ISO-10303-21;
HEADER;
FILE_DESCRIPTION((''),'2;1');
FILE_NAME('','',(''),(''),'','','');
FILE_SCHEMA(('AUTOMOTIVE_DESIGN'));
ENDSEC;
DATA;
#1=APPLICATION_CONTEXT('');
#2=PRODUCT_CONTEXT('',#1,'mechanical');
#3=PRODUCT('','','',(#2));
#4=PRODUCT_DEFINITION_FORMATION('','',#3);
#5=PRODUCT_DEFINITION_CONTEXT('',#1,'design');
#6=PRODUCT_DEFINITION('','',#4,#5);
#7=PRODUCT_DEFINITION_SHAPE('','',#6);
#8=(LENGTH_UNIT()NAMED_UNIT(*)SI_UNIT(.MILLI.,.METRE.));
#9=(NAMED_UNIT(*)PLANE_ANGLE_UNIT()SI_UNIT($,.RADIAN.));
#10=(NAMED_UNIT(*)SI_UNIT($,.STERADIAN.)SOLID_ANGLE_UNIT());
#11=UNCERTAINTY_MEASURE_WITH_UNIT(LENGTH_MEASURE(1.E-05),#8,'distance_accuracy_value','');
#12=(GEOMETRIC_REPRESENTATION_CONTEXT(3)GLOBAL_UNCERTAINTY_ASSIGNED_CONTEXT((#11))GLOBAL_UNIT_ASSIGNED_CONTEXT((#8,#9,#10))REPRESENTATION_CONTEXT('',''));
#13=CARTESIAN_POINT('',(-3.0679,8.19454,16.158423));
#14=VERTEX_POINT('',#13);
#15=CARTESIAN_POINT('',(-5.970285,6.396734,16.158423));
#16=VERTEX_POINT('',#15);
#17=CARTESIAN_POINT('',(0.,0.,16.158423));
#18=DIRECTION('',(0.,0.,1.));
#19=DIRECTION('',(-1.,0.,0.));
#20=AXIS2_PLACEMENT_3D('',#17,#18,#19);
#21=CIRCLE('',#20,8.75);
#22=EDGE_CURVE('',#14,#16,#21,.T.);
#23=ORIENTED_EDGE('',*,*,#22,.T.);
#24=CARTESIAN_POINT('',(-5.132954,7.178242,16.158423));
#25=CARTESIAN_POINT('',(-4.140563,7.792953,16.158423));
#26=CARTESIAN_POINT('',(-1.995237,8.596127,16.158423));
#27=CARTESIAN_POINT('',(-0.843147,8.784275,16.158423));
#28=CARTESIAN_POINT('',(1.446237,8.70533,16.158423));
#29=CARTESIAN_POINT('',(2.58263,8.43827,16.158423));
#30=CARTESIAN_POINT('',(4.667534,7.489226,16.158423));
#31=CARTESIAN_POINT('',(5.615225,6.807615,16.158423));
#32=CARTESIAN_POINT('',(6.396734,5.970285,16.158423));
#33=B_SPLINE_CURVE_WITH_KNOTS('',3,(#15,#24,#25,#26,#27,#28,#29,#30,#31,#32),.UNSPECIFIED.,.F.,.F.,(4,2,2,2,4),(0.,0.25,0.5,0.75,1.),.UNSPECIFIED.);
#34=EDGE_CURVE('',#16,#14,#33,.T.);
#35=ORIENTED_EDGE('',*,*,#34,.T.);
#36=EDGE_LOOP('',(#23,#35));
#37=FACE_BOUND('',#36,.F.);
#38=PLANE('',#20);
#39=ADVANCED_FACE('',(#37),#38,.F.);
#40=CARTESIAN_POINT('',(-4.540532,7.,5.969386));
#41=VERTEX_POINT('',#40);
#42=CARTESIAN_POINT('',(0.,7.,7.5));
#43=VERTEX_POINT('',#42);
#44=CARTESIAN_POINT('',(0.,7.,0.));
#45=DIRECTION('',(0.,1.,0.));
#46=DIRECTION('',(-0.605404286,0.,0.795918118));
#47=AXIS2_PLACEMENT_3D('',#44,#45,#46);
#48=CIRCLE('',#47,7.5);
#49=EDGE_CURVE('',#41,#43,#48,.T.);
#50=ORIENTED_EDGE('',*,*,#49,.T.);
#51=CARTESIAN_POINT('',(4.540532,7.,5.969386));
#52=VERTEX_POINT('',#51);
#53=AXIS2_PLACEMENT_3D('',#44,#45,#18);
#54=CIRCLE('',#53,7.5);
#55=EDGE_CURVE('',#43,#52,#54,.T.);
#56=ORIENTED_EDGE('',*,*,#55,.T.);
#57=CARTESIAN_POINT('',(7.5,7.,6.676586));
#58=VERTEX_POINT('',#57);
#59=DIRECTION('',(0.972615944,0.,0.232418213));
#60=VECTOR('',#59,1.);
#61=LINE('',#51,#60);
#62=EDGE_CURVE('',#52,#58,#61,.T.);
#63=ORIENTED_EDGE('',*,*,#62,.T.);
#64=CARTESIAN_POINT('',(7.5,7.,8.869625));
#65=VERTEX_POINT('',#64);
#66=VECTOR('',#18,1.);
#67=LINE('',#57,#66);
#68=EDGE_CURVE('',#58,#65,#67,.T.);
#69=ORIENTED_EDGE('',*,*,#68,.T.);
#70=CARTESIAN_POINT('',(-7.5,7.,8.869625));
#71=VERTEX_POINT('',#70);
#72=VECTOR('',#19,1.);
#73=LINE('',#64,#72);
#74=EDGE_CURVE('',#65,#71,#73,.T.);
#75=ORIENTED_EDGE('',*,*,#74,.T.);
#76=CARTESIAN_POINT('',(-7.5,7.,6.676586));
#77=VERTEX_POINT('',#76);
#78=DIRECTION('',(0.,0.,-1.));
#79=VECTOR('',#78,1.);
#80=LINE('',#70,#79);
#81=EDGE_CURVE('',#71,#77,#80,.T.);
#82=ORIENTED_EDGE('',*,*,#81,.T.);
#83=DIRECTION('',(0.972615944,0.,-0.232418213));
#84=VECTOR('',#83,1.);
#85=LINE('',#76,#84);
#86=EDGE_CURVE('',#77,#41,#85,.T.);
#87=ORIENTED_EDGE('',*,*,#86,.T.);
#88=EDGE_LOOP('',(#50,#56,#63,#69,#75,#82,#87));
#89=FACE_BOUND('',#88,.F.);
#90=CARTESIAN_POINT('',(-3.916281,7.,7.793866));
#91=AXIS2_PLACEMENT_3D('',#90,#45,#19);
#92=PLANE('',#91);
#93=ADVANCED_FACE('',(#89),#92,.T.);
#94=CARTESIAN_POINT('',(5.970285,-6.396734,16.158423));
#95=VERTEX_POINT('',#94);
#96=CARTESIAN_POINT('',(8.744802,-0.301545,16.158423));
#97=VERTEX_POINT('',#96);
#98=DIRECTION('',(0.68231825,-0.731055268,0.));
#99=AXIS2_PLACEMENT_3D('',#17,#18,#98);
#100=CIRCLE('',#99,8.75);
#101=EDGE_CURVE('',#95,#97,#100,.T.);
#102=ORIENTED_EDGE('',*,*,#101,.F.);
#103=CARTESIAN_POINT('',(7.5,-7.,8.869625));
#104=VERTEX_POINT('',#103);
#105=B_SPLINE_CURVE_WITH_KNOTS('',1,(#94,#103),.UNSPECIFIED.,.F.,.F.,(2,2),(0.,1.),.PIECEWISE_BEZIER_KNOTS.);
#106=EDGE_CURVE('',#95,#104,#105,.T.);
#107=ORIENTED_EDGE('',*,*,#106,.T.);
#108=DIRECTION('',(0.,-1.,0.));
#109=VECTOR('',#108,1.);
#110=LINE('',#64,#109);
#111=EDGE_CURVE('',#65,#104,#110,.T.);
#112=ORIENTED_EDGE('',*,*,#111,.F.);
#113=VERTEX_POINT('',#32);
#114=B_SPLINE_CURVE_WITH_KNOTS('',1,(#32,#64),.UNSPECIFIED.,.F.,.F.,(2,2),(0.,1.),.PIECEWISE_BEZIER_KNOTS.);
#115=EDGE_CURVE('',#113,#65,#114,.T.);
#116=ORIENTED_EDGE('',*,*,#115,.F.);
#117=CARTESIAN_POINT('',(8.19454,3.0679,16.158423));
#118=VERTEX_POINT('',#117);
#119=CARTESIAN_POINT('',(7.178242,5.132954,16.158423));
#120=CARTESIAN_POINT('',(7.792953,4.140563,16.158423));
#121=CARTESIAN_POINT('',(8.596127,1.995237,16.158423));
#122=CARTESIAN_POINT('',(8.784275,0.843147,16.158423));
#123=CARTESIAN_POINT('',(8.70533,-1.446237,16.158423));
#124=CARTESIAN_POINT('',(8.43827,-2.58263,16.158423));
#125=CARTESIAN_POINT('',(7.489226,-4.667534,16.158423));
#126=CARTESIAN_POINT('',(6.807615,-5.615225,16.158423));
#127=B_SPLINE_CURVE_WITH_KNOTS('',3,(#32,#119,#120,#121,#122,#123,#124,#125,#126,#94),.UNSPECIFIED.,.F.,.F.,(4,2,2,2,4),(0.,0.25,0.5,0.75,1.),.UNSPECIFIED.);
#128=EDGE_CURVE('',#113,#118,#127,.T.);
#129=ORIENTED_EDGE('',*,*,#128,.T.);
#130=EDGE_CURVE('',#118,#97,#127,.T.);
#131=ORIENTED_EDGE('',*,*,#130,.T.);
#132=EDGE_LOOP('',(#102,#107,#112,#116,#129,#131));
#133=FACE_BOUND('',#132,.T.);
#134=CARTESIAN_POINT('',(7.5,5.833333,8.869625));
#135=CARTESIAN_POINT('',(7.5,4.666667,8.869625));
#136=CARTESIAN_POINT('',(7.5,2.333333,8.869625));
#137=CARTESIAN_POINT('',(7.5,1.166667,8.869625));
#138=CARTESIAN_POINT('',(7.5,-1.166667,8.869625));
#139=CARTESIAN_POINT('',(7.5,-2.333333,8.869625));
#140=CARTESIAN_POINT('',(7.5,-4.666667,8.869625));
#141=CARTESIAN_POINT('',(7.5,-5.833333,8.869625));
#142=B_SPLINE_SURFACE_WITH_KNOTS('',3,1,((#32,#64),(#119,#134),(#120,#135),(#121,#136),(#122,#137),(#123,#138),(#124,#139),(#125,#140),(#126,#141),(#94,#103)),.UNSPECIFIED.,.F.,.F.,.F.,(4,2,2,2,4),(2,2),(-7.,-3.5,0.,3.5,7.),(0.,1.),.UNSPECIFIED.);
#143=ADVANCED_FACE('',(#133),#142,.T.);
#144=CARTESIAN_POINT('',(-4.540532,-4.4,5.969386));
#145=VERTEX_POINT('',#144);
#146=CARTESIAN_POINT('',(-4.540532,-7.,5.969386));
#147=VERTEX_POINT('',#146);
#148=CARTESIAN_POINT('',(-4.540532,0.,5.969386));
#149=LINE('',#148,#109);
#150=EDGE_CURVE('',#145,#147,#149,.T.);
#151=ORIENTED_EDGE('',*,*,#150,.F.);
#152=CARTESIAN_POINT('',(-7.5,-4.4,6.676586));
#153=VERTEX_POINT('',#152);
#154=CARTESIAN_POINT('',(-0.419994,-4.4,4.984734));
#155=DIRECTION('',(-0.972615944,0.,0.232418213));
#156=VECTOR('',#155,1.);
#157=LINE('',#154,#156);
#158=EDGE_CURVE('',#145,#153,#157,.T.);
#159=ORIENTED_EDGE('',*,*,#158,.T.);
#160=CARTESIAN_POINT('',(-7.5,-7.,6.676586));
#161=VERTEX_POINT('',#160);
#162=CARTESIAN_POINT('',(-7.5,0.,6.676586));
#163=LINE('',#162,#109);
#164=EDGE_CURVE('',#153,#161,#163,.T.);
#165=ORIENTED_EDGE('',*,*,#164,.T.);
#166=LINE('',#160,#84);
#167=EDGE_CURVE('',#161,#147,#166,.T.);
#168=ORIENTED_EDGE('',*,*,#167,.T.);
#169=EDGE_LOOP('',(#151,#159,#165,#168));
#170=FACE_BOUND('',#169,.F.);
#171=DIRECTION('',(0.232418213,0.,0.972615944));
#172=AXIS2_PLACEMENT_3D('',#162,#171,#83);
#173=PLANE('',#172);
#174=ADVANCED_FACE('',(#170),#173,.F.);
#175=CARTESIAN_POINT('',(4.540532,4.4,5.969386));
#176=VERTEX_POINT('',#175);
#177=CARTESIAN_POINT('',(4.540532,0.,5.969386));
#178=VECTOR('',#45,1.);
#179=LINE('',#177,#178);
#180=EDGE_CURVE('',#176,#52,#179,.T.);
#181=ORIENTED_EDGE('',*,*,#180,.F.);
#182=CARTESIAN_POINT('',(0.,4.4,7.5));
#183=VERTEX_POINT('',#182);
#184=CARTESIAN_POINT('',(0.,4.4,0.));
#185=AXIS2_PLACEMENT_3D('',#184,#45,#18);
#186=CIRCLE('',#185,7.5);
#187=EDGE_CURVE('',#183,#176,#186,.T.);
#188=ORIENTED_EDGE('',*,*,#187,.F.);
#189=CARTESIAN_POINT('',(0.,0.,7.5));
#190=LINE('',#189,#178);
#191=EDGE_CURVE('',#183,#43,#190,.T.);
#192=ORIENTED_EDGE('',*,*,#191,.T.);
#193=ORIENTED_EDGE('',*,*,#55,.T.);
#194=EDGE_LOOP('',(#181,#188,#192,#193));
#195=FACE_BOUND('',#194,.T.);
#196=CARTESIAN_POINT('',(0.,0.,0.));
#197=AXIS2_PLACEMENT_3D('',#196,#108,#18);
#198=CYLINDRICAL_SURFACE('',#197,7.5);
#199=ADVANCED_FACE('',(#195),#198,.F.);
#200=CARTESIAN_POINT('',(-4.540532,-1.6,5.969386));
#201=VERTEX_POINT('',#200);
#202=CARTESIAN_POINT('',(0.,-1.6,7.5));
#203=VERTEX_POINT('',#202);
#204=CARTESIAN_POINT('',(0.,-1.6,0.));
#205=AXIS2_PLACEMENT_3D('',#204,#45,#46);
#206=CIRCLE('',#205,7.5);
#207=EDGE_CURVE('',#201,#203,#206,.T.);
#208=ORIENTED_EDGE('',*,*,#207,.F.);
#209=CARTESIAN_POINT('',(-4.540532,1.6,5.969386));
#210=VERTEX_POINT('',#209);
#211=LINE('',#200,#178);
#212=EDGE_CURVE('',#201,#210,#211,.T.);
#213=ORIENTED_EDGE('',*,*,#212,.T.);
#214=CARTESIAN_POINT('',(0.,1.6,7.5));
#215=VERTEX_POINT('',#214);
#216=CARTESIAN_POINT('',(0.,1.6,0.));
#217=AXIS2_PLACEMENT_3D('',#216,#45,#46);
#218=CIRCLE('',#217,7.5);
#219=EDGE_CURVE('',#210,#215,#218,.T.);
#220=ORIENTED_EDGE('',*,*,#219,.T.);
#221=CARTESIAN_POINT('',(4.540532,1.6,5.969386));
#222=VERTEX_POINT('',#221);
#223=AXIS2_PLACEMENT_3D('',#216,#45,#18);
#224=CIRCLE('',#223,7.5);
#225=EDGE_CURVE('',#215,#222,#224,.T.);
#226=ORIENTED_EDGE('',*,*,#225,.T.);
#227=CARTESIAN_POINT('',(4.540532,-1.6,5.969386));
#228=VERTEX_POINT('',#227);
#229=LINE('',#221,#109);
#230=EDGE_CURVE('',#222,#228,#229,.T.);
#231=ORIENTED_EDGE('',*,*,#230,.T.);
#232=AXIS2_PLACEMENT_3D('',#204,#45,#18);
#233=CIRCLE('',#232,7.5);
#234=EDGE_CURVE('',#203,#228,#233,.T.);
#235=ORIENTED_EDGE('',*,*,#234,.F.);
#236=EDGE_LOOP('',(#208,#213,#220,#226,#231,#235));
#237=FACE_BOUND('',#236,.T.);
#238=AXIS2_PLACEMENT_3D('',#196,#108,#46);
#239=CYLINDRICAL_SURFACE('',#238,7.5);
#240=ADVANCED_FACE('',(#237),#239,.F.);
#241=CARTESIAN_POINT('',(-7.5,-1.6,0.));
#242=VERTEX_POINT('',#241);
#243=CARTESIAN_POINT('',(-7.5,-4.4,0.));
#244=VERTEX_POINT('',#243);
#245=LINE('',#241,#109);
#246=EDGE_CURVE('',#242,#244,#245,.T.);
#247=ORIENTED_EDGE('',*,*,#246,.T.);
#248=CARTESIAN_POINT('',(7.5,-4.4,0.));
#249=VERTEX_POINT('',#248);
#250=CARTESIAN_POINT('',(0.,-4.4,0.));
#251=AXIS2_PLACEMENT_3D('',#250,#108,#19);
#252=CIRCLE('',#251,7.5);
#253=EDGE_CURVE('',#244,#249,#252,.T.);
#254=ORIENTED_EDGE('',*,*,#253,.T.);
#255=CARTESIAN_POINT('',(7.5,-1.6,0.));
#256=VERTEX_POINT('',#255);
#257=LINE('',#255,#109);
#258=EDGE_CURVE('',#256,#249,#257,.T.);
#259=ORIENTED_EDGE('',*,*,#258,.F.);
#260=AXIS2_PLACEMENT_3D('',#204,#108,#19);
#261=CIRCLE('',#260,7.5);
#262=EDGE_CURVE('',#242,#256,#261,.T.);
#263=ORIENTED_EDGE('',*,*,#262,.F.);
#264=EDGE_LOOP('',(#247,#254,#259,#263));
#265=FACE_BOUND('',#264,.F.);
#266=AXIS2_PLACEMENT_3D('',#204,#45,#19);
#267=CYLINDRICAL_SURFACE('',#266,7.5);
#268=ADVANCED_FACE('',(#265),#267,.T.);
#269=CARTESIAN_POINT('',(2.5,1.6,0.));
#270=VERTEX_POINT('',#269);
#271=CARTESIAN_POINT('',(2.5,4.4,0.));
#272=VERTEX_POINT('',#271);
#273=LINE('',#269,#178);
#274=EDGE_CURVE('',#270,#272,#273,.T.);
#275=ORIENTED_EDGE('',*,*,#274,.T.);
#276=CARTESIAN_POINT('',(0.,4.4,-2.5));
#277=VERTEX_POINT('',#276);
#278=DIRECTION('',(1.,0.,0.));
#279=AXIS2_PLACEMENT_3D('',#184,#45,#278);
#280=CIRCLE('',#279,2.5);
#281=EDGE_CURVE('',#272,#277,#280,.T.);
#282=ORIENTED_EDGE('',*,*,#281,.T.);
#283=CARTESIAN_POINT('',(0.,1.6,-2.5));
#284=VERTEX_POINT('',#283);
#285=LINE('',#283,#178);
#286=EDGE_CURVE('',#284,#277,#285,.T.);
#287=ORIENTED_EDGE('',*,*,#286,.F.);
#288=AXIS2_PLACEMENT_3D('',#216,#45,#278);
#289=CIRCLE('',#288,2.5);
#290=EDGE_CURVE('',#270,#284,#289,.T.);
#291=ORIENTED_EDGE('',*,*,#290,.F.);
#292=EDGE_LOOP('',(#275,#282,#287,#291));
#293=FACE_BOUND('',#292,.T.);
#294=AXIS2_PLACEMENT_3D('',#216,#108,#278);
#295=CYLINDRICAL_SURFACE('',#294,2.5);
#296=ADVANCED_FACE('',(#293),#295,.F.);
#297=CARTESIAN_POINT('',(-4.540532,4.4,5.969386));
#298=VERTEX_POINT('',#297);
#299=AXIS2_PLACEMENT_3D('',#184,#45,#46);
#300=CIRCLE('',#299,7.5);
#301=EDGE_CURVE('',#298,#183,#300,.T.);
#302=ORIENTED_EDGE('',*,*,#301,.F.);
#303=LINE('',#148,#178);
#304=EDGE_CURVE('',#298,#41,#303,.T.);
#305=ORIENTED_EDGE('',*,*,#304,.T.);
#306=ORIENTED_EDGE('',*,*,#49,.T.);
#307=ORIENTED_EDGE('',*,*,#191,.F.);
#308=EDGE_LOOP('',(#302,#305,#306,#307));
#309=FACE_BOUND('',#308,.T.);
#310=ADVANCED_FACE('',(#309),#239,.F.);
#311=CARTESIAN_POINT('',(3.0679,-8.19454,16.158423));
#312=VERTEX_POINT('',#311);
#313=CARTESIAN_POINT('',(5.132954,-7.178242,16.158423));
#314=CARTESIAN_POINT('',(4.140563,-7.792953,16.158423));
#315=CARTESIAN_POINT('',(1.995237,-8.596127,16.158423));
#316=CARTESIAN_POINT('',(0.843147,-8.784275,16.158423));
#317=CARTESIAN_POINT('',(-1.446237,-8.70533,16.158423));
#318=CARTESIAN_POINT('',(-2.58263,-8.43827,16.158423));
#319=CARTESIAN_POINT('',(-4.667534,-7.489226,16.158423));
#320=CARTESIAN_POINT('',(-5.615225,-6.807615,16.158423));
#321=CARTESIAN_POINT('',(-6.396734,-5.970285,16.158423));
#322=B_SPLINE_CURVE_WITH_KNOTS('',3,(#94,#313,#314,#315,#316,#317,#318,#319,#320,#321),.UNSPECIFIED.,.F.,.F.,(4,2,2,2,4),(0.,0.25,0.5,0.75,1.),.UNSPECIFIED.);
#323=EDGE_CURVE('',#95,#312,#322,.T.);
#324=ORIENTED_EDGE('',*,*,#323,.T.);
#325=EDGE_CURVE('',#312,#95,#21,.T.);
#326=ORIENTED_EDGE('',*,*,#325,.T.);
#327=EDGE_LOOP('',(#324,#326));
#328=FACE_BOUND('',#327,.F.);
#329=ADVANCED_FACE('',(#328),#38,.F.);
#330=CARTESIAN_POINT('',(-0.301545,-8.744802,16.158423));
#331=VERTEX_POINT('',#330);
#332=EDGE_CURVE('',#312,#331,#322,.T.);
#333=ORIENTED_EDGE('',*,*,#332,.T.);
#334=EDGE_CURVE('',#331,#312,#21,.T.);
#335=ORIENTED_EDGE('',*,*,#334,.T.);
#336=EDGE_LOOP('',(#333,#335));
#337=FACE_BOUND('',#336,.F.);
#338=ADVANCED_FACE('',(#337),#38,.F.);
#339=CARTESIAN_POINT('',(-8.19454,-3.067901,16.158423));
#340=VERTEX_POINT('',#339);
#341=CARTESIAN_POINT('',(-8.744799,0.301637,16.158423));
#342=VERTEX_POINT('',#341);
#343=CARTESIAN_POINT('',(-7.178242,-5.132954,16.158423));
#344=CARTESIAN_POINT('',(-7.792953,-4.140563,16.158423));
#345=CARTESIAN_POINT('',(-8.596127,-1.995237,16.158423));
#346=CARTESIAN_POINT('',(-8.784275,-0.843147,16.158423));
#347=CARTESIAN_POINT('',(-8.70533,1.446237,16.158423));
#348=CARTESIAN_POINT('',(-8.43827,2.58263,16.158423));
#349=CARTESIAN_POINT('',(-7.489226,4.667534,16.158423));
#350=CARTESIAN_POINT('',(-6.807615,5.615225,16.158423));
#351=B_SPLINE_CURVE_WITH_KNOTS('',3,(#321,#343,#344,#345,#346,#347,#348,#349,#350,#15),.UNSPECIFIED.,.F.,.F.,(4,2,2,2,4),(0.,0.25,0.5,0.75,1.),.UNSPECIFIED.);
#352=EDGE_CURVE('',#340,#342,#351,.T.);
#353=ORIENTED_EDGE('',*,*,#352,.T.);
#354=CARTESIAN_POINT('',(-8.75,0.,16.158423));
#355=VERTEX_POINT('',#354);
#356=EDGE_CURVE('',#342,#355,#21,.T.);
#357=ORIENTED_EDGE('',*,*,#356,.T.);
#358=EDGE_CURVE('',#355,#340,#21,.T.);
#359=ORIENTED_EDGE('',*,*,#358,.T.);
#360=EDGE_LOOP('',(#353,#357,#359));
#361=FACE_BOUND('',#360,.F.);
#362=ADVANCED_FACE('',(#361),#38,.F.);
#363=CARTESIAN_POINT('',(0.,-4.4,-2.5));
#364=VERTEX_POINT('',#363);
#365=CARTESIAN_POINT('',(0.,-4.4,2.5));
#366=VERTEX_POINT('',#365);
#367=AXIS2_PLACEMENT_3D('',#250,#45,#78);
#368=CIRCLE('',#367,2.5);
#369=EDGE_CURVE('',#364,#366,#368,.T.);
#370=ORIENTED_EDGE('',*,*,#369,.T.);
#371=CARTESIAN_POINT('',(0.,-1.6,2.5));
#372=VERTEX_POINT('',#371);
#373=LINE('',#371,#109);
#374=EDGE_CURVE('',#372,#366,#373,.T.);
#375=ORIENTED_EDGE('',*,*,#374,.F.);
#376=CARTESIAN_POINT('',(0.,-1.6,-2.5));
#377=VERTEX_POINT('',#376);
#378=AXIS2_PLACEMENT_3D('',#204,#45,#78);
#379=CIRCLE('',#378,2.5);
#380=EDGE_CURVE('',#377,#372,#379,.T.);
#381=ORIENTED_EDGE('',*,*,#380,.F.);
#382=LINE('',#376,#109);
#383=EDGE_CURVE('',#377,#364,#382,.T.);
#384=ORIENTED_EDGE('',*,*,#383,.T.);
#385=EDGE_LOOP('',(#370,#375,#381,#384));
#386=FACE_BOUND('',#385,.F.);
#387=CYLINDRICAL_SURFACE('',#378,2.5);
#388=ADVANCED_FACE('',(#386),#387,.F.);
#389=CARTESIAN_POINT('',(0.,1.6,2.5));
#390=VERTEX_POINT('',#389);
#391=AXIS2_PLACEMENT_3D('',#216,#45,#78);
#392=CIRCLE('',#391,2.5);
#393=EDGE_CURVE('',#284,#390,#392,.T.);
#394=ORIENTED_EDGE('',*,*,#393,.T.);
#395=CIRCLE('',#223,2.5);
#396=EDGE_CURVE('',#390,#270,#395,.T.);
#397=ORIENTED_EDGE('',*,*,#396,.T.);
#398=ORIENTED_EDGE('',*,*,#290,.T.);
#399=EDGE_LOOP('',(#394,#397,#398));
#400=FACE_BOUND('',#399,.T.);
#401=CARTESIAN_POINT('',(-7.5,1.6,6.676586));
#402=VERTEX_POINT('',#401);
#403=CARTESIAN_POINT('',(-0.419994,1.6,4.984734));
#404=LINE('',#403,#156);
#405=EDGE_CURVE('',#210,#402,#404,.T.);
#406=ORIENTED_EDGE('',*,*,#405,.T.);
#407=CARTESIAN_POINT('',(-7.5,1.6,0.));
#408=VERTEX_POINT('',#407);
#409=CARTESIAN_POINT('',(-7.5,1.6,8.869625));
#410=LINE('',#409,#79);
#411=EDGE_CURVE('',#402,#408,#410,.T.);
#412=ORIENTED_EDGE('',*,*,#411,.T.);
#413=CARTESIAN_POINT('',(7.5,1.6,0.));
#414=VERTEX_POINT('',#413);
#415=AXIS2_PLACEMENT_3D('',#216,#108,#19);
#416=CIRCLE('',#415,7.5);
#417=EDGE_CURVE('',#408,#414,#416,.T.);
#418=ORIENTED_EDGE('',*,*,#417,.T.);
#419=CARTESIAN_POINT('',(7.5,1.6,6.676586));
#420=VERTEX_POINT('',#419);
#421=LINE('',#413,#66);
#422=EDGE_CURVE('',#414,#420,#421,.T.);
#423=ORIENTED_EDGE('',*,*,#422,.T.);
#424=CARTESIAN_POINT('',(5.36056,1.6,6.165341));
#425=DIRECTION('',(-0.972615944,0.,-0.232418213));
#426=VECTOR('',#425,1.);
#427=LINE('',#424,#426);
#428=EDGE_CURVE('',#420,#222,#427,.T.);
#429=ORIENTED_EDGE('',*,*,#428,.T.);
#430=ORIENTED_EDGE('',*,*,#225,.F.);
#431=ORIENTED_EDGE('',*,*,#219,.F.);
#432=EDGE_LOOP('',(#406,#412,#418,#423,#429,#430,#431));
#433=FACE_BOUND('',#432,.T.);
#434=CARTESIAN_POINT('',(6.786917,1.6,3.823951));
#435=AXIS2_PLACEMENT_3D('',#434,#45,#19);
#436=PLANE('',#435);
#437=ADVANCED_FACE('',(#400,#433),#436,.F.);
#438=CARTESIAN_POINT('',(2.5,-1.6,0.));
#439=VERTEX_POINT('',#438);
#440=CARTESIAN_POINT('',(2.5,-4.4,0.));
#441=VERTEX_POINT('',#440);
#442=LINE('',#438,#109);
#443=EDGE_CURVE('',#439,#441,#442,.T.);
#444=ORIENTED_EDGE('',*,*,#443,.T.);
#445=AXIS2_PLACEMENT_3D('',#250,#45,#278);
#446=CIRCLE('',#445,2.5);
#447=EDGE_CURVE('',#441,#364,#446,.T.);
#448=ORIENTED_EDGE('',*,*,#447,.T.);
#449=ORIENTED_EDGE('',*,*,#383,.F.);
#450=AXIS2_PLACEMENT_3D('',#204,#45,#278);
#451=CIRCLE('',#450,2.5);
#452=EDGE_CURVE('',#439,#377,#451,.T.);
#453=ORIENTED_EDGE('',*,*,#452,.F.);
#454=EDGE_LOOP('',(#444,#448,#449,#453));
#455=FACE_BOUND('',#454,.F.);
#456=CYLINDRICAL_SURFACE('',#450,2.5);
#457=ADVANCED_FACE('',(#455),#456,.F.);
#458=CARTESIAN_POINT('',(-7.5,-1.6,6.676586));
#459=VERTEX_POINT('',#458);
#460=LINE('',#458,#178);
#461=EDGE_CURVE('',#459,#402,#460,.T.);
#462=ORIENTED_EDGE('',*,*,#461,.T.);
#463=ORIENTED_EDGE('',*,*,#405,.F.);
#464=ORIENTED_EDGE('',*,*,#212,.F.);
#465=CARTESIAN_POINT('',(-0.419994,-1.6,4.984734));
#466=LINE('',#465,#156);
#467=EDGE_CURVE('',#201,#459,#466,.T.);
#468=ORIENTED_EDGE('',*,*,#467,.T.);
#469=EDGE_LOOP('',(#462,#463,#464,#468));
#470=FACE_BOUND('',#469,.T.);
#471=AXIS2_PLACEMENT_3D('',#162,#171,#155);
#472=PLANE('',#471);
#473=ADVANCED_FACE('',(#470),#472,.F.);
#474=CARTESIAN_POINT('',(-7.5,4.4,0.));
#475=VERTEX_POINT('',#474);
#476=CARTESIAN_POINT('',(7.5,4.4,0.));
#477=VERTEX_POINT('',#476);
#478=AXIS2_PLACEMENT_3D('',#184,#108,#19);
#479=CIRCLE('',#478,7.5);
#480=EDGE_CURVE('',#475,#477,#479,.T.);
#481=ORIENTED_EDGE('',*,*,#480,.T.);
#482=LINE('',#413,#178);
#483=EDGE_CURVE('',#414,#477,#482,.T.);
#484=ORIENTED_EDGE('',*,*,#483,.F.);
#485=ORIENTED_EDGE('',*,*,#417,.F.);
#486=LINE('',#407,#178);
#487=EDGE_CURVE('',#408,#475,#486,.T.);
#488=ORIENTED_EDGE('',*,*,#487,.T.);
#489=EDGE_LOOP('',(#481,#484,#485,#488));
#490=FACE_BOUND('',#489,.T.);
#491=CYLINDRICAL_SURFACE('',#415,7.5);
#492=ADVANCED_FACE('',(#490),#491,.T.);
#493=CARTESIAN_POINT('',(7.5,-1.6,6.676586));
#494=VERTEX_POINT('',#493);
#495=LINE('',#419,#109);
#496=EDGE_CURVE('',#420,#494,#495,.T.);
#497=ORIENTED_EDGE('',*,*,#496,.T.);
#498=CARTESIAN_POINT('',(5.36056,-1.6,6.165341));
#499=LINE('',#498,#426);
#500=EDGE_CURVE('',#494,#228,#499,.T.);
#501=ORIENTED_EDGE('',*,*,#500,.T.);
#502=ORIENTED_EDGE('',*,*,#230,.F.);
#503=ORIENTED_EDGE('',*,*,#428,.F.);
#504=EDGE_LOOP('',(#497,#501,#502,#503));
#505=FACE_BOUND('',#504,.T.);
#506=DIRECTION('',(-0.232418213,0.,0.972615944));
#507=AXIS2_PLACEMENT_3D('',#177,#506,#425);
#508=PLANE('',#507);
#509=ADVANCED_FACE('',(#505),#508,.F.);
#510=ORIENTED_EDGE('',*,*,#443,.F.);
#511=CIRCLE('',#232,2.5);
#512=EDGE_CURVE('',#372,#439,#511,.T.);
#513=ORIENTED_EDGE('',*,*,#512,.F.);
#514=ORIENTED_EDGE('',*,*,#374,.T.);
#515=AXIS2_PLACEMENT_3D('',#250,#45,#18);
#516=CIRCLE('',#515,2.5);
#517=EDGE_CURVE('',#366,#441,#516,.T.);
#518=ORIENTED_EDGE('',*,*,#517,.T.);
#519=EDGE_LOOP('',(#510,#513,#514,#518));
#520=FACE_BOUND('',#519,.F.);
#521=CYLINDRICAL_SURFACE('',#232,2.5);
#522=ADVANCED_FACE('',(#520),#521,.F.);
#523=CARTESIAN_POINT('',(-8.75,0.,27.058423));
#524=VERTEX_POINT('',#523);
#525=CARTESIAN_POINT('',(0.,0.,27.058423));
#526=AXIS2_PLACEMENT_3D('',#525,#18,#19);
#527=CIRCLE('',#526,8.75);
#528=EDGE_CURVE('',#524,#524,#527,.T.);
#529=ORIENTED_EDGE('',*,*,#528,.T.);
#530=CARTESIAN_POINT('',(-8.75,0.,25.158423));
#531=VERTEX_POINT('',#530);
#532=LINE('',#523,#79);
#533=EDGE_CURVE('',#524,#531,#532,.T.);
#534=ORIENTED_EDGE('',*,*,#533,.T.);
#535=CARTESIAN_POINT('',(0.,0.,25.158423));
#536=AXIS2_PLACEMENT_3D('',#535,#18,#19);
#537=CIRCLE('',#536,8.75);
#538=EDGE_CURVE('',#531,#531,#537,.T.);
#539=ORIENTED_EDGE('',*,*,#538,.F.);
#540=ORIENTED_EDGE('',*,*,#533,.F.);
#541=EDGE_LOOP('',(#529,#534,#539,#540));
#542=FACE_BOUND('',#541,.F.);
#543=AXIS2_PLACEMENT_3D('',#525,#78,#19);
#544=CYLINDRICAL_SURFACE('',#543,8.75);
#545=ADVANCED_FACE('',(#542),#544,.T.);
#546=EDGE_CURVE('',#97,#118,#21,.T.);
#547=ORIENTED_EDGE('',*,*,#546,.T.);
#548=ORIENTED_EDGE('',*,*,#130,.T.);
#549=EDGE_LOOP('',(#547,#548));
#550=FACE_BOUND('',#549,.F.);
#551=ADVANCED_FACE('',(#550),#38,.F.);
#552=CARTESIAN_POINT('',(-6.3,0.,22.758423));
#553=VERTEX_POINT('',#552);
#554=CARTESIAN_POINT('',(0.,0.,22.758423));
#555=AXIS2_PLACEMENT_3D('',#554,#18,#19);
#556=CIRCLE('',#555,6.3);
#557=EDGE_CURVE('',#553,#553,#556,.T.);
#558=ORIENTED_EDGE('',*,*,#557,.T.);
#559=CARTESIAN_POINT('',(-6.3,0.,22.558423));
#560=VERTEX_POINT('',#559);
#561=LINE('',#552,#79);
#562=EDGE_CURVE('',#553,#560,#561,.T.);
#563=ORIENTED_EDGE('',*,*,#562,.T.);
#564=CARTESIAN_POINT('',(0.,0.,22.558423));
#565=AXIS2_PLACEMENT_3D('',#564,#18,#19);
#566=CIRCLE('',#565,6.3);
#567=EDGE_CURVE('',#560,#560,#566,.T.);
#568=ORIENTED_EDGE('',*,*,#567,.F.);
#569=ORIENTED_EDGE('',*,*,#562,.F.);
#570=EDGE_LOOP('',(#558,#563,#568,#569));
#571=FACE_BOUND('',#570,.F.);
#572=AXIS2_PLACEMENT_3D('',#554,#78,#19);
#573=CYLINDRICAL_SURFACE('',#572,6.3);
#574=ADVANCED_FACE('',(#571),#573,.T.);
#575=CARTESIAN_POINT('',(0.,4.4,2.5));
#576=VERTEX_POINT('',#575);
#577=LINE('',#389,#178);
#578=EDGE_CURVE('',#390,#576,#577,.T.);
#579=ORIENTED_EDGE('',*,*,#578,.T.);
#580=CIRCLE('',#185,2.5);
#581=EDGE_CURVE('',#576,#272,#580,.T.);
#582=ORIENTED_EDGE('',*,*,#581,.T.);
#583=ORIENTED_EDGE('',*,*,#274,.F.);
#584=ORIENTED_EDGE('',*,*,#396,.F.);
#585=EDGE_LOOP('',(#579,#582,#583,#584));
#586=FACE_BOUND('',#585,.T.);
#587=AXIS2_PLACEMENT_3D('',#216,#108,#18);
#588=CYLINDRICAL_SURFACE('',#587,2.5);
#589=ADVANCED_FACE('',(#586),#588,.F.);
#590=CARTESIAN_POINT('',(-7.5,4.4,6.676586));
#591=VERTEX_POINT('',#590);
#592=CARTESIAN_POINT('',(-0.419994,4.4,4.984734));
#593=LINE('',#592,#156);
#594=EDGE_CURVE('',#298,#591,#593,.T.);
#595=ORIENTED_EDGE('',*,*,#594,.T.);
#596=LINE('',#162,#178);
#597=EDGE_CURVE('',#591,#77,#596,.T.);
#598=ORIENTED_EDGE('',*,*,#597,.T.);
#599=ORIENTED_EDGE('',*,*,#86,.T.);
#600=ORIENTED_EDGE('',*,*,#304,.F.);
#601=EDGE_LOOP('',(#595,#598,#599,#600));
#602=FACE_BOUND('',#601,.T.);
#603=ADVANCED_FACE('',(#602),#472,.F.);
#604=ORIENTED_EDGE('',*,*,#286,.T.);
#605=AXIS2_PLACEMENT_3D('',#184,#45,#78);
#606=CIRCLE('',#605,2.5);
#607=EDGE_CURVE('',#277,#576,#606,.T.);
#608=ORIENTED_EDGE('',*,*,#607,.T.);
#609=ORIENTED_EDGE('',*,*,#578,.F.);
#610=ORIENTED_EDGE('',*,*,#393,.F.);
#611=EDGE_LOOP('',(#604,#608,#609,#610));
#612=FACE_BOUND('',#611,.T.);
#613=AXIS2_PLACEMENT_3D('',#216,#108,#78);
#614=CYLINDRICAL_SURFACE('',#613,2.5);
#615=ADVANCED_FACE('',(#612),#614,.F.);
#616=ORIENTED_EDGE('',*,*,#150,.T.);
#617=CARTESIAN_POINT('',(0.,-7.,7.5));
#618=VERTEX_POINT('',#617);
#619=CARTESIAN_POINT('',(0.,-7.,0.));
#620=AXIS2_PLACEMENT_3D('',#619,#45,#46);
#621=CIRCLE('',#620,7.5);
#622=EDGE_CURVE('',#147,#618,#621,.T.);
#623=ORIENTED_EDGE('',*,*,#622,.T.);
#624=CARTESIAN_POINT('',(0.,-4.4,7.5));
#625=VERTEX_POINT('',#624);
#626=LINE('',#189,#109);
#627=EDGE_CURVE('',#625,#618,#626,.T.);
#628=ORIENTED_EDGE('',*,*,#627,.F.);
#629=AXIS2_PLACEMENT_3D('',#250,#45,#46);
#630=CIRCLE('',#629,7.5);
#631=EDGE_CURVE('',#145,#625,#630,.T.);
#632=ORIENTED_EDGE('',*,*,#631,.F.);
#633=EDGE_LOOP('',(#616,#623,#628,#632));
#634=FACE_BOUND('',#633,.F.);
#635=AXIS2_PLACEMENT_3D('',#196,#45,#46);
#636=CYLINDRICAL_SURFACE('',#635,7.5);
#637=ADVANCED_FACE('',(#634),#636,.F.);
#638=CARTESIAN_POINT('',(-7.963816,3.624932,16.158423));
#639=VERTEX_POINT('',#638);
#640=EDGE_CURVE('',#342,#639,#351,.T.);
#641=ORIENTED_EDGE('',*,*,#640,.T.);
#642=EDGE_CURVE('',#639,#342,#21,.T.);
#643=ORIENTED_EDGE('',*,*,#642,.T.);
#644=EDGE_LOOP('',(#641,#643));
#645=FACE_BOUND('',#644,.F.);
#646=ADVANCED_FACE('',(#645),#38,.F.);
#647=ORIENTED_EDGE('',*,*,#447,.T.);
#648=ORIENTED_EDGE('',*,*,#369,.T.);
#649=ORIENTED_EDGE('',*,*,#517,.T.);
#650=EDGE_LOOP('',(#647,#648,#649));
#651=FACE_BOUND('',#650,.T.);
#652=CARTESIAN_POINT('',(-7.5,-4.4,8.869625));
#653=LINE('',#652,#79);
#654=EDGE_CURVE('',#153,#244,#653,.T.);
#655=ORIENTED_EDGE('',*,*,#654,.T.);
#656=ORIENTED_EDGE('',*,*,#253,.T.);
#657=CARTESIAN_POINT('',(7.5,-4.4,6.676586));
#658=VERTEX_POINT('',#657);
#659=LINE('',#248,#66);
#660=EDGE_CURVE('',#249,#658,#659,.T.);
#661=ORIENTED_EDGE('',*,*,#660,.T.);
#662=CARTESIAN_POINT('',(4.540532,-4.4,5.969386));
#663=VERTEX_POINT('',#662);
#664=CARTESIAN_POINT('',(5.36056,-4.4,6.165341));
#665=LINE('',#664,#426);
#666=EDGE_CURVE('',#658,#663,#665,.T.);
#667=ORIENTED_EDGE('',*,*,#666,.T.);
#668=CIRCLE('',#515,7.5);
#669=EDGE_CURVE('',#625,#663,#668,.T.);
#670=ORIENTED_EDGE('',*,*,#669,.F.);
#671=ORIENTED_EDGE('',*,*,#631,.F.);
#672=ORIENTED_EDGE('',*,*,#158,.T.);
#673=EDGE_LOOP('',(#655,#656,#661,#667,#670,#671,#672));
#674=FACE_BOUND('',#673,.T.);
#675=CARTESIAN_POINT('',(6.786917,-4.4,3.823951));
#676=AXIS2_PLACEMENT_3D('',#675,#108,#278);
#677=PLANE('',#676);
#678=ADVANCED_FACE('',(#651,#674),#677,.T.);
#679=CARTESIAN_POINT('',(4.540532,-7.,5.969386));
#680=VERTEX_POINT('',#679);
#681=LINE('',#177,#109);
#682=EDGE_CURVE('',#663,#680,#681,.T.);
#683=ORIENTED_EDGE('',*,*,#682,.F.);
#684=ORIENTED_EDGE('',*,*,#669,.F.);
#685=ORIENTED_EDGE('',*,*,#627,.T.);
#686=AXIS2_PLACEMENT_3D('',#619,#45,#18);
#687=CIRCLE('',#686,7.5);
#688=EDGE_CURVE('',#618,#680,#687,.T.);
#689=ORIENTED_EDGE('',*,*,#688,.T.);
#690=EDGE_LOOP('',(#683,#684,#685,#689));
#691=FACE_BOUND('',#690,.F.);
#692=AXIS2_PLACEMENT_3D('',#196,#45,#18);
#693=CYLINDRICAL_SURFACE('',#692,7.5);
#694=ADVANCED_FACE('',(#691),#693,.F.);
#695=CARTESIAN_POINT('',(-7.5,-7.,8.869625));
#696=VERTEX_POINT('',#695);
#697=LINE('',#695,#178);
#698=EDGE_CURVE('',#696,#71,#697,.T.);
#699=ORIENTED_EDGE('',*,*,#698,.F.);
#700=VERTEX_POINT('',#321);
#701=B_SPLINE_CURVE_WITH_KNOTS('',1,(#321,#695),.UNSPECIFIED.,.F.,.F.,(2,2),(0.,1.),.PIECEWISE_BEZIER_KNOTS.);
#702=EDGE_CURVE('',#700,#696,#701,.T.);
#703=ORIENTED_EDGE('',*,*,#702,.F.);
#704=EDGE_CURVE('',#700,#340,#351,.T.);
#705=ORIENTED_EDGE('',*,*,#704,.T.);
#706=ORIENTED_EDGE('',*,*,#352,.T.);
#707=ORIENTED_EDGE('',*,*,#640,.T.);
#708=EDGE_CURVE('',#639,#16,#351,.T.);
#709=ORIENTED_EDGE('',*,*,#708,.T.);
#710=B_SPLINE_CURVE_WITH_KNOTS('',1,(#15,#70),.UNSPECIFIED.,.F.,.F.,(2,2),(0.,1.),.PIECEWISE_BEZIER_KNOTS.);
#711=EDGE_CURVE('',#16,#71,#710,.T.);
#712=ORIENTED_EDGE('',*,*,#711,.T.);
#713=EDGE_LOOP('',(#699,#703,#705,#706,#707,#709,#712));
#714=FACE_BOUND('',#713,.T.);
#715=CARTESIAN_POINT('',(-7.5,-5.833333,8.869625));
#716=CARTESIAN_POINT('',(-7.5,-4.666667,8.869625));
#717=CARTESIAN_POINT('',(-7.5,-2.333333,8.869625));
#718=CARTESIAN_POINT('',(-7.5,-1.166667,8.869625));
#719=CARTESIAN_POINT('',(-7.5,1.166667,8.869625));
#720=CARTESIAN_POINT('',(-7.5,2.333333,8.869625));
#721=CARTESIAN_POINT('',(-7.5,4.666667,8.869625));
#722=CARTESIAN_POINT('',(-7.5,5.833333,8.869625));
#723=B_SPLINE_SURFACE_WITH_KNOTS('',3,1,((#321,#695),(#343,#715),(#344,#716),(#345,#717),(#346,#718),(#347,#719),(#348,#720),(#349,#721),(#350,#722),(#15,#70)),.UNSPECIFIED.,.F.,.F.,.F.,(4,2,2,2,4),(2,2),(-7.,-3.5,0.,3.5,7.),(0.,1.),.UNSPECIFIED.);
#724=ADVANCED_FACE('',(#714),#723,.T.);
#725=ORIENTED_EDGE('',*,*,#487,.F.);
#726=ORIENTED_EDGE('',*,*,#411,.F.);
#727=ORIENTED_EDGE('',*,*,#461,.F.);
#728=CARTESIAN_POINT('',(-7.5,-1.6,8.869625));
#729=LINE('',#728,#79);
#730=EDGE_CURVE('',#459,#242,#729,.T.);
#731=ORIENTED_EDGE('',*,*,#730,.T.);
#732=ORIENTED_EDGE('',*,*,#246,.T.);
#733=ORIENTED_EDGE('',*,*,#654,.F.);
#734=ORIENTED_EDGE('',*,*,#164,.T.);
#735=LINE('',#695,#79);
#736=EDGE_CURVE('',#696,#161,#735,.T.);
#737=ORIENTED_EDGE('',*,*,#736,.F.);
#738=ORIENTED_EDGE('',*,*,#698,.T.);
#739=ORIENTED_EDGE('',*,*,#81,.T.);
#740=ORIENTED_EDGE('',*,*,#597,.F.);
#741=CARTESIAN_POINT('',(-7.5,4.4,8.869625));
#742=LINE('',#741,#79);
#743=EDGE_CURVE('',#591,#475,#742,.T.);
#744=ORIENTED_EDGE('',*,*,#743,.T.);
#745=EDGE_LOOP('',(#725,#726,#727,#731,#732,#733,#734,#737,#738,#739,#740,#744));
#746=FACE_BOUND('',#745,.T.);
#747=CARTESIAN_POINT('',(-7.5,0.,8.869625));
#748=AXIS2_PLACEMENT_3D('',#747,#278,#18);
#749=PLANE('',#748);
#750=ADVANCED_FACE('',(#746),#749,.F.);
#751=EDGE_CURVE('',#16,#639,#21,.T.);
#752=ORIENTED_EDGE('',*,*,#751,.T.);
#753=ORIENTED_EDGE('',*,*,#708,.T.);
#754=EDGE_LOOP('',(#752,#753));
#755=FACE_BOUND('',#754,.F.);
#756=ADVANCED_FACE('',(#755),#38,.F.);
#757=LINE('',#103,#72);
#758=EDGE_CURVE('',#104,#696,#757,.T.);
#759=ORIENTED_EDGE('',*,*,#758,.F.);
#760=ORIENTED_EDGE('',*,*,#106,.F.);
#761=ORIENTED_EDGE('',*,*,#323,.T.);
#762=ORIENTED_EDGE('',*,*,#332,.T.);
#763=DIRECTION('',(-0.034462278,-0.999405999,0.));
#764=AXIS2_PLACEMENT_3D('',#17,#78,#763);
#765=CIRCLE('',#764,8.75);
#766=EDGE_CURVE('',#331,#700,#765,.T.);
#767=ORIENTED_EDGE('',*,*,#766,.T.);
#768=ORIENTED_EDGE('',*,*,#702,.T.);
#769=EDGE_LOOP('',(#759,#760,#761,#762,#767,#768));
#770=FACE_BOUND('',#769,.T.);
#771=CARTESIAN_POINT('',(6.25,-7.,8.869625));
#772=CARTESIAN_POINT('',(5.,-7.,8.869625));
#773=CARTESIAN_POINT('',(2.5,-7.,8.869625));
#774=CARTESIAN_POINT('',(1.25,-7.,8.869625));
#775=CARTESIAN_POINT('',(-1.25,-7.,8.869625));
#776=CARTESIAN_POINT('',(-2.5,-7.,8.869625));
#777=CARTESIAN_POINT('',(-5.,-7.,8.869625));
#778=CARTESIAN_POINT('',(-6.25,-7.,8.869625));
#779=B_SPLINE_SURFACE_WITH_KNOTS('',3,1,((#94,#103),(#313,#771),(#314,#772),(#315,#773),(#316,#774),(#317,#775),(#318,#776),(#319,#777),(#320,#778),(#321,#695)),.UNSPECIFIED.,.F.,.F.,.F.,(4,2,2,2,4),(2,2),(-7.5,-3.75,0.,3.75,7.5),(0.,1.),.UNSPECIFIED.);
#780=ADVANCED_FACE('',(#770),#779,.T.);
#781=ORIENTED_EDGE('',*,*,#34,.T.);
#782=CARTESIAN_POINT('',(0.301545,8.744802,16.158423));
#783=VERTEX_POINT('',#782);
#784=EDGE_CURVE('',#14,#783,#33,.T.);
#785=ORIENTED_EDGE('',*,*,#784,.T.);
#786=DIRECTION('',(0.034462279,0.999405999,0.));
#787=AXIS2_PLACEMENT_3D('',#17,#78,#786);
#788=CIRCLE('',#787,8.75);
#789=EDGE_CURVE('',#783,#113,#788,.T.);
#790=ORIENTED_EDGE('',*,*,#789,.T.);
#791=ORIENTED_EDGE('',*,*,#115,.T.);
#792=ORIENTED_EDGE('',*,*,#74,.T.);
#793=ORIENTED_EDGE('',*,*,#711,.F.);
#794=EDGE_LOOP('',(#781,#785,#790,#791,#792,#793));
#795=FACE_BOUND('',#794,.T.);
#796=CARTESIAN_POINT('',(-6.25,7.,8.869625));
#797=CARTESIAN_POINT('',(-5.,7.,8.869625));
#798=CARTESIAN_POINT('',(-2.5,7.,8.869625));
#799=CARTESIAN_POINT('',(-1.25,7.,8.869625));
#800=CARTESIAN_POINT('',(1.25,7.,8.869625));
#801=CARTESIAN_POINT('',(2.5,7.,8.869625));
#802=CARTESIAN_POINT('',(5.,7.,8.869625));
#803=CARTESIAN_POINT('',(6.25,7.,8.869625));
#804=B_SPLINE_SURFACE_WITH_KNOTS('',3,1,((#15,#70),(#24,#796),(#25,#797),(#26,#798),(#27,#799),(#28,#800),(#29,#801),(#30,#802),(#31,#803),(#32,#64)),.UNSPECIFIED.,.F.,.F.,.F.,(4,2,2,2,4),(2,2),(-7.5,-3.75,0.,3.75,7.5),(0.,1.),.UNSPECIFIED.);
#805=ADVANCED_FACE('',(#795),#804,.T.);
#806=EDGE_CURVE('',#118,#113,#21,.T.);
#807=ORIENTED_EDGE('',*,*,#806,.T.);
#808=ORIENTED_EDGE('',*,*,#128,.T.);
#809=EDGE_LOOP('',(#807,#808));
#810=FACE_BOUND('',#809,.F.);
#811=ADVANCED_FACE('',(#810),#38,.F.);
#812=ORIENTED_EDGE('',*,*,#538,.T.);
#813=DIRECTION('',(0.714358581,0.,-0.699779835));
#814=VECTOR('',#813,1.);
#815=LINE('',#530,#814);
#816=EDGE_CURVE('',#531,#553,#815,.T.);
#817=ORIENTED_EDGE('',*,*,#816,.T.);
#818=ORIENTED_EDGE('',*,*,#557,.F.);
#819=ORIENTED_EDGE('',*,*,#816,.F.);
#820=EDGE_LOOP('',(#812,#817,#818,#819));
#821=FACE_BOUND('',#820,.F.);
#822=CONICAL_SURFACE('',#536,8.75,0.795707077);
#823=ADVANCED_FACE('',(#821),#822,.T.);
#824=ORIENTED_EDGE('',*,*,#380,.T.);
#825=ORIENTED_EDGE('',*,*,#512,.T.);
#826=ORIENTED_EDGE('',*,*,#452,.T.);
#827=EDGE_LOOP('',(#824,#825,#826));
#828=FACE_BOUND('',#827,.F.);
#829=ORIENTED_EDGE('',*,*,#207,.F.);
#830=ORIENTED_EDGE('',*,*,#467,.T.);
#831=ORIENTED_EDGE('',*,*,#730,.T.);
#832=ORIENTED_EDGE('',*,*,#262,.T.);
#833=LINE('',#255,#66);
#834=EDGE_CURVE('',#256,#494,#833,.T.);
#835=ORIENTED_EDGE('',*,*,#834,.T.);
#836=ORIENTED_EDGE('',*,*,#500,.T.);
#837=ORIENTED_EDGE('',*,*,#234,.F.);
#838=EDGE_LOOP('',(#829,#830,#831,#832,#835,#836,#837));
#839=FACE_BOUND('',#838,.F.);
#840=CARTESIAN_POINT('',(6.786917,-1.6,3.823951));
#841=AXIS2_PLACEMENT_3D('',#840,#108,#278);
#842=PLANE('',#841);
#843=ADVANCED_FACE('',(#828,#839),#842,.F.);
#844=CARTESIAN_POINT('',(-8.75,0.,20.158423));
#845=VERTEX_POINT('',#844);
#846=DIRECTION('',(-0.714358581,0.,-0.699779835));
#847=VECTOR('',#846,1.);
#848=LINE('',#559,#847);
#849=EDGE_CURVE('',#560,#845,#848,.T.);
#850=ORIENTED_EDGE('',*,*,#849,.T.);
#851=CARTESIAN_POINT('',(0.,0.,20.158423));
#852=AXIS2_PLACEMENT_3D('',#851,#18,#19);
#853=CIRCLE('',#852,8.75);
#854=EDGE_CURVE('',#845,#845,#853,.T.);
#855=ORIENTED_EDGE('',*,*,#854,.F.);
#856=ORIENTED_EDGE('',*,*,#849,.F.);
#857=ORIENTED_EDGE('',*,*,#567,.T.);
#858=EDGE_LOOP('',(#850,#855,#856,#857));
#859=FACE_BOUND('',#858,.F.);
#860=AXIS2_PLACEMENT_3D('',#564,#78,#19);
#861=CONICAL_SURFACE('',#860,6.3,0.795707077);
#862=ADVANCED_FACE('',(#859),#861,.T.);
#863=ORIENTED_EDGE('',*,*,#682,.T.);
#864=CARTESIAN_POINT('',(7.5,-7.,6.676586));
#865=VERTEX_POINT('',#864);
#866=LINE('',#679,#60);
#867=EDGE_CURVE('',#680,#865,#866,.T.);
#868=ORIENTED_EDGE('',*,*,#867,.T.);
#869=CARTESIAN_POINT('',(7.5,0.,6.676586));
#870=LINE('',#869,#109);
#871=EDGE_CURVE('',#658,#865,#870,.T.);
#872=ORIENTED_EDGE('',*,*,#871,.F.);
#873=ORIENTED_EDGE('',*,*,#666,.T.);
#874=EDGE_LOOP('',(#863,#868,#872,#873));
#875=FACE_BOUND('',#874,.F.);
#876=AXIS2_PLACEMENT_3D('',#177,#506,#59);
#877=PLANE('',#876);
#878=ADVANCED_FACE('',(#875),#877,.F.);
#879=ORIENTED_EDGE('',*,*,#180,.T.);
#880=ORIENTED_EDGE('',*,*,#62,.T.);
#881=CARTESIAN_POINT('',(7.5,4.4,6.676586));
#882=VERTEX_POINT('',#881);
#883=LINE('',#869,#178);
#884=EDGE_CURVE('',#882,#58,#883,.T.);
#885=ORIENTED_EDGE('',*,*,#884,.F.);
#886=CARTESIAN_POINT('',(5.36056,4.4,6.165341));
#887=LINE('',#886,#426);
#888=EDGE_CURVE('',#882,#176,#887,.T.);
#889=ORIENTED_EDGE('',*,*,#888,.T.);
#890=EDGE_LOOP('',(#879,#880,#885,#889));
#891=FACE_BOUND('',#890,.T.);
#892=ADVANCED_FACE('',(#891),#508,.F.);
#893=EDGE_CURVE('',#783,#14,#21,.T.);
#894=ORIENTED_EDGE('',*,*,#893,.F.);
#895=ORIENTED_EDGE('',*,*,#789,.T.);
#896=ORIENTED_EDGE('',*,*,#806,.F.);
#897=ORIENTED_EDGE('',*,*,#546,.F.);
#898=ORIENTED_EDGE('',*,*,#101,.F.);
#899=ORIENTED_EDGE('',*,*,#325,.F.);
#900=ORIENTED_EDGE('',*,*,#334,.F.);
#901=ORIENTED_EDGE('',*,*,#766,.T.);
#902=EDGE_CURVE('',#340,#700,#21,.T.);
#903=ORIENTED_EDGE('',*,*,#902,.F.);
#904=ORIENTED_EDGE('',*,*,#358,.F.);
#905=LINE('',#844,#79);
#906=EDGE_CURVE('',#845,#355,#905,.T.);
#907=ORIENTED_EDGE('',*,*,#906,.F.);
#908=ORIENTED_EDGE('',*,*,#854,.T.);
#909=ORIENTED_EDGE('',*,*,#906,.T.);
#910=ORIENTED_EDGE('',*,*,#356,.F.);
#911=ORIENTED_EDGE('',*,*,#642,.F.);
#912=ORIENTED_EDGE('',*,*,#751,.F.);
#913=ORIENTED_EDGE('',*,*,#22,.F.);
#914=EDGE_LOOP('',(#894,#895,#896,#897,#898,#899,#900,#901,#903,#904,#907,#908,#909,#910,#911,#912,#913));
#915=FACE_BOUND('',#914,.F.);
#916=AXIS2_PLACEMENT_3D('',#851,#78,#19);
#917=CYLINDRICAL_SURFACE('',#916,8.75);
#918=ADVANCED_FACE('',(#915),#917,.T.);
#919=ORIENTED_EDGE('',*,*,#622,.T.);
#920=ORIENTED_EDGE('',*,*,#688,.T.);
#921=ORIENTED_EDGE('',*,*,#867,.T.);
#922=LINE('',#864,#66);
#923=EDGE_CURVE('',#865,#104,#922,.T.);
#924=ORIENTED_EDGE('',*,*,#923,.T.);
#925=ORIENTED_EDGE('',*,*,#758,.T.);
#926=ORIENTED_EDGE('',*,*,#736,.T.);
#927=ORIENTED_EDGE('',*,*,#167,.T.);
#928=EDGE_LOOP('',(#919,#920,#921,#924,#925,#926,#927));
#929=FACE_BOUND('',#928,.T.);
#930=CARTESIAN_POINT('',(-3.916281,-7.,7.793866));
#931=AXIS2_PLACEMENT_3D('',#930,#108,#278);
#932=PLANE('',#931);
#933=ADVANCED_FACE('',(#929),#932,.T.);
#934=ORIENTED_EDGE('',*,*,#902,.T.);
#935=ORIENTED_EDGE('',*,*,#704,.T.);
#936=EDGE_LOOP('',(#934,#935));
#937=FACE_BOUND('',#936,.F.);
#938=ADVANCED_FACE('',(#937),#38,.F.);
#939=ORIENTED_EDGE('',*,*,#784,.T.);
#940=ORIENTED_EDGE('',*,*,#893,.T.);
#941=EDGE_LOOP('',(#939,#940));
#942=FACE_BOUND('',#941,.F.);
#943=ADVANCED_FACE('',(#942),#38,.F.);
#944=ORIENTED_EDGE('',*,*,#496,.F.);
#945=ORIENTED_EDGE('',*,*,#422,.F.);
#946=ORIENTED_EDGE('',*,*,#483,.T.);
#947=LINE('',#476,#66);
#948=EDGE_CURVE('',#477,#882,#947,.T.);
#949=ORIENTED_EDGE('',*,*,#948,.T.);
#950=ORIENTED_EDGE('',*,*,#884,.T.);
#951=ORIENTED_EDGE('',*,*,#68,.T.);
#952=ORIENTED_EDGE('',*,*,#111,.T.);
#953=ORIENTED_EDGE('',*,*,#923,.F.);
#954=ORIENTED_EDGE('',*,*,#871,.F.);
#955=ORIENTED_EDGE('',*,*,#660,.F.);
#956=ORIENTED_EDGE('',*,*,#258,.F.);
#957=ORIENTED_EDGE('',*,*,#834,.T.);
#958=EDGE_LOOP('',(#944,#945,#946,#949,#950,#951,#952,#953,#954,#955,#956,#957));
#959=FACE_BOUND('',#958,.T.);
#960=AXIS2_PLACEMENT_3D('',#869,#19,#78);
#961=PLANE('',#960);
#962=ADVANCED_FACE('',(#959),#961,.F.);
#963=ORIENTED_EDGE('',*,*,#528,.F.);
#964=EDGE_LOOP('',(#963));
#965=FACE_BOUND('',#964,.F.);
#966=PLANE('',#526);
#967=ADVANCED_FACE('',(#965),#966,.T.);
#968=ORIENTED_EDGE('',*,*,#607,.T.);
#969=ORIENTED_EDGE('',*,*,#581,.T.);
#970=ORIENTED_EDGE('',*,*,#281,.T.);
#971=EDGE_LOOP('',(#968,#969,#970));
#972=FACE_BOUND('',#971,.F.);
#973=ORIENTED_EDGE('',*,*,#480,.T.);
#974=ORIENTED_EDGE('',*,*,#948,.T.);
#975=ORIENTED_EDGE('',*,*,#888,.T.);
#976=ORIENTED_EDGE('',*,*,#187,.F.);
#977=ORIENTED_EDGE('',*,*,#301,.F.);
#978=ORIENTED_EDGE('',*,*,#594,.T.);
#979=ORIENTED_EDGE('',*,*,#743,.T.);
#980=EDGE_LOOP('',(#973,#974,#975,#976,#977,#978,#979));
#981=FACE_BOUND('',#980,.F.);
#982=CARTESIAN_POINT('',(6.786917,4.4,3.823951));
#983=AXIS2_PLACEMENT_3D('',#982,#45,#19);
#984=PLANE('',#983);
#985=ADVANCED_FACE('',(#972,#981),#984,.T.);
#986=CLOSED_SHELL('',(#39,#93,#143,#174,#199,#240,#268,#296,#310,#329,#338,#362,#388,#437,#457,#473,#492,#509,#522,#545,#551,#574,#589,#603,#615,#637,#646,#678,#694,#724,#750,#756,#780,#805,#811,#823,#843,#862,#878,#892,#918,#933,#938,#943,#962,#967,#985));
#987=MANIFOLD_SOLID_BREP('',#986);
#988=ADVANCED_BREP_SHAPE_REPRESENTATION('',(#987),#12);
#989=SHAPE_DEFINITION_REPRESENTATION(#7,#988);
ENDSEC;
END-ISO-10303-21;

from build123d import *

# Parameters (mm, degrees)
F1_START  = 1.6
F1_DEPTH  = 2.8
F2_DEPTH  = 7
F3_FACE_W = 15
F3_FACE_H = 14


# Not quite as in the source:
# - the arcs of a loft's sections are written as splines that run evenly, so that the points pair up as in the source's solid


with BuildPart() as f1:
    # F0 (on Front) → F1 (new body)
    with BuildSketch(Plane.XZ.offset(F1_START)):
        with BuildLine():
            ThreePointArc((4.5405321415, 5.9693858873), (6.7195234601, 3.331366757), (7.5, 0))
            Line((7.5, 0), (7.5, 6.6765861305))
            Line((7.5, 6.6765861305), (4.5405321415, 5.9693858873))
        make_face()
        with BuildLine():
            Line((-7.5, 6.6765861305), (-7.5, 0))
            ThreePointArc((-7.5, 0), (-6.7195234601, 3.331366757), (-4.5405321415, 5.9693858873))
            Line((-4.5405321415, 5.9693858873), (-7.5, 6.6765861305))
        make_face()
        with BuildLine():
            ThreePointArc((0, 7.5), (2.3957885805, 7.1070526294), (4.5405321415, 5.9693858873))
            Line((4.5405321415, 5.9693858873), (7.5, 6.6765861305))
            Line((7.5, 6.6765861305), (7.5, 8.8696251196))
            Line((7.5, 8.8696251196), (0, 8.8696251196))
            Line((0, 8.8696251196), (0, 7.5))
        make_face()
        with BuildLine():
            ThreePointArc((-4.5405321415, 5.9693858873), (-2.3957885805, 7.1070526294), (0, 7.5))
            Line((0, 7.5), (0, 8.8696251196))
            Line((0, 8.8696251196), (-7.5, 8.8696251196))
            Line((-7.5, 8.8696251196), (-7.5, 6.6765861305))
            Line((-7.5, 6.6765861305), (-4.5405321415, 5.9693858873))
        make_face()
        with BuildLine():
            ThreePointArc((0, -7.5), (5.3033008589, -5.3033008589), (7.5, 0))
            ThreePointArc((7.5, 0), (6.7195234601, 3.331366757), (4.5405321415, 5.9693858873))
            ThreePointArc((4.5405321415, 5.9693858873), (2.3957885805, 7.1070526294), (0, 7.5))
            Line((0, 7.5), (0, 2.5))
            ThreePointArc((0, 2.5), (1.767766953, 1.767766953), (2.5, 0))
            ThreePointArc((2.5, 0), (1.767766953, -1.767766953), (0, -2.5))
            Line((0, -2.5), (0, -7.5))
        make_face()
        with BuildLine():
            ThreePointArc((-7.5, 0), (-5.3033008589, -5.3033008589), (0, -7.5))
            Line((0, -7.5), (0, -2.5))
            ThreePointArc((0, -2.5), (-2.5, 0), (0, 2.5))
            Line((0, 2.5), (0, 7.5))
            ThreePointArc((0, 7.5), (-2.3957885805, 7.1070526294), (-4.5405321415, 5.9693858873))
            ThreePointArc((-4.5405321415, 5.9693858873), (-6.7195234601, 3.331366757), (-7.5, 0))
        make_face()
    extrude(amount=F1_DEPTH)

    # F0 (on Front) → F2 (join)
    with BuildSketch(Plane.XZ):
        with BuildLine():
            ThreePointArc((-4.5405321415, 5.9693858873), (-2.3957885805, 7.1070526294), (0, 7.5))
            Line((0, 7.5), (0, 8.8696251196))
            Line((0, 8.8696251196), (-7.5, 8.8696251196))
            Line((-7.5, 8.8696251196), (-7.5, 6.6765861305))
            Line((-7.5, 6.6765861305), (-4.5405321415, 5.9693858873))
        make_face()
        with BuildLine():
            ThreePointArc((0, 7.5), (2.3957885805, 7.1070526294), (4.5405321415, 5.9693858873))
            Line((4.5405321415, 5.9693858873), (7.5, 6.6765861305))
            Line((7.5, 6.6765861305), (7.5, 8.8696251196))
            Line((7.5, 8.8696251196), (0, 8.8696251196))
            Line((0, 8.8696251196), (0, 7.5))
        make_face()
    extrude(amount=F2_DEPTH)

    # F3: F1 across face


with BuildPart() as f1_1:
    add(f1.part)
    add(f1.part.mirror(Plane(origin=(0, 0, 7.7459450352), x_dir=(1, 0, 0), z_dir=(0, 1, 0))))



with BuildPart() as f4:
    # F0 (on Front) → F4 (revolve)
    with BuildSketch(Plane.XZ):
        Polygon((-8.75, 16.1584225655), (0, 16.1584225655), (0, 27.0584225655), (-8.75, 27.0584225655), (-8.75, 25.1584225655), (-6.3, 22.7584225655), (-6.3, 22.5584225655), (-8.75, 20.1584225655), align=None)
    revolve(axis=Axis((0, 0, 25.701952844), (0, 0, 1)))


with BuildPart() as f1_2:
    add(f1_1.part)

    add(f4.part)  # F5 merges F4
    # F4_face (on face) → F5 section 0
    with BuildSketch(Plane(origin=(0, 0, 16.1584225655), x_dir=(1, 0, 0), z_dir=(0, 0, -1))):
        with BuildLine():
            add(Edge.make_bspline(
                [(-6.3967335971, 5.9702846907), (-7.1782420356, 5.1329542208), (-7.7929531303, 4.1405626748), (-8.5961274355, 1.9952370454), (-8.7842746312, 0.8431470561), (-8.7053303575, -1.4462368833), (-8.4382699492, -2.5826300587), (-7.4892256465, -4.6675343567), (-6.8076151605, -5.6152251586), (-5.9702846907, -6.3967335971)],
                knots=[0, 0, 0, 0, 0.25, 0.25, 0.5, 0.5, 0.75, 0.75, 1, 1, 1, 1], degree=3))
            add(Edge.make_bspline(
                [(-5.9702846907, -6.3967335971), (-5.1329542208, -7.1782420356), (-4.1405626748, -7.7929531303), (-1.9952370454, -8.5961274355), (-0.8431470561, -8.7842746312), (1.4462368833, -8.7053303575), (2.5826300587, -8.4382699492), (4.6675343567, -7.4892256465), (5.6152251586, -6.8076151605), (6.3967335971, -5.9702846907)],
                knots=[0, 0, 0, 0, 0.25, 0.25, 0.5, 0.5, 0.75, 0.75, 1, 1, 1, 1], degree=3))
            add(Edge.make_bspline(
                [(6.3967335971, -5.9702846907), (7.1782420356, -5.1329542208), (7.7929531303, -4.1405626748), (8.5961274355, -1.9952370454), (8.7842746312, -0.8431470561), (8.7053303575, 1.4462368833), (8.4382699492, 2.5826300587), (7.4892256465, 4.6675343567), (6.8076151605, 5.6152251586), (5.9702846907, 6.3967335971)],
                knots=[0, 0, 0, 0, 0.25, 0.25, 0.5, 0.5, 0.75, 0.75, 1, 1, 1, 1], degree=3))
            add(Edge.make_bspline(
                [(5.9702846907, 6.3967335971), (5.1329542208, 7.1782420356), (4.1405626748, 7.7929531303), (1.9952370454, 8.5961274355), (0.8431470561, 8.7842746312), (-1.4462368833, 8.7053303575), (-2.5826300587, 8.4382699492), (-4.6675343567, 7.4892256465), (-5.6152251586, 6.8076151605), (-6.3967335971, 5.9702846907)],
                knots=[0, 0, 0, 0, 0.25, 0.25, 0.5, 0.5, 0.75, 0.75, 1, 1, 1, 1], degree=3))
        make_face()
    # F3_face (on face) → F5 section 1
    with BuildSketch(Plane.XY.offset(8.8696251196)):
        Rectangle(F3_FACE_W, F3_FACE_H)
    loft(ruled=True)


solid = f1_2.part
